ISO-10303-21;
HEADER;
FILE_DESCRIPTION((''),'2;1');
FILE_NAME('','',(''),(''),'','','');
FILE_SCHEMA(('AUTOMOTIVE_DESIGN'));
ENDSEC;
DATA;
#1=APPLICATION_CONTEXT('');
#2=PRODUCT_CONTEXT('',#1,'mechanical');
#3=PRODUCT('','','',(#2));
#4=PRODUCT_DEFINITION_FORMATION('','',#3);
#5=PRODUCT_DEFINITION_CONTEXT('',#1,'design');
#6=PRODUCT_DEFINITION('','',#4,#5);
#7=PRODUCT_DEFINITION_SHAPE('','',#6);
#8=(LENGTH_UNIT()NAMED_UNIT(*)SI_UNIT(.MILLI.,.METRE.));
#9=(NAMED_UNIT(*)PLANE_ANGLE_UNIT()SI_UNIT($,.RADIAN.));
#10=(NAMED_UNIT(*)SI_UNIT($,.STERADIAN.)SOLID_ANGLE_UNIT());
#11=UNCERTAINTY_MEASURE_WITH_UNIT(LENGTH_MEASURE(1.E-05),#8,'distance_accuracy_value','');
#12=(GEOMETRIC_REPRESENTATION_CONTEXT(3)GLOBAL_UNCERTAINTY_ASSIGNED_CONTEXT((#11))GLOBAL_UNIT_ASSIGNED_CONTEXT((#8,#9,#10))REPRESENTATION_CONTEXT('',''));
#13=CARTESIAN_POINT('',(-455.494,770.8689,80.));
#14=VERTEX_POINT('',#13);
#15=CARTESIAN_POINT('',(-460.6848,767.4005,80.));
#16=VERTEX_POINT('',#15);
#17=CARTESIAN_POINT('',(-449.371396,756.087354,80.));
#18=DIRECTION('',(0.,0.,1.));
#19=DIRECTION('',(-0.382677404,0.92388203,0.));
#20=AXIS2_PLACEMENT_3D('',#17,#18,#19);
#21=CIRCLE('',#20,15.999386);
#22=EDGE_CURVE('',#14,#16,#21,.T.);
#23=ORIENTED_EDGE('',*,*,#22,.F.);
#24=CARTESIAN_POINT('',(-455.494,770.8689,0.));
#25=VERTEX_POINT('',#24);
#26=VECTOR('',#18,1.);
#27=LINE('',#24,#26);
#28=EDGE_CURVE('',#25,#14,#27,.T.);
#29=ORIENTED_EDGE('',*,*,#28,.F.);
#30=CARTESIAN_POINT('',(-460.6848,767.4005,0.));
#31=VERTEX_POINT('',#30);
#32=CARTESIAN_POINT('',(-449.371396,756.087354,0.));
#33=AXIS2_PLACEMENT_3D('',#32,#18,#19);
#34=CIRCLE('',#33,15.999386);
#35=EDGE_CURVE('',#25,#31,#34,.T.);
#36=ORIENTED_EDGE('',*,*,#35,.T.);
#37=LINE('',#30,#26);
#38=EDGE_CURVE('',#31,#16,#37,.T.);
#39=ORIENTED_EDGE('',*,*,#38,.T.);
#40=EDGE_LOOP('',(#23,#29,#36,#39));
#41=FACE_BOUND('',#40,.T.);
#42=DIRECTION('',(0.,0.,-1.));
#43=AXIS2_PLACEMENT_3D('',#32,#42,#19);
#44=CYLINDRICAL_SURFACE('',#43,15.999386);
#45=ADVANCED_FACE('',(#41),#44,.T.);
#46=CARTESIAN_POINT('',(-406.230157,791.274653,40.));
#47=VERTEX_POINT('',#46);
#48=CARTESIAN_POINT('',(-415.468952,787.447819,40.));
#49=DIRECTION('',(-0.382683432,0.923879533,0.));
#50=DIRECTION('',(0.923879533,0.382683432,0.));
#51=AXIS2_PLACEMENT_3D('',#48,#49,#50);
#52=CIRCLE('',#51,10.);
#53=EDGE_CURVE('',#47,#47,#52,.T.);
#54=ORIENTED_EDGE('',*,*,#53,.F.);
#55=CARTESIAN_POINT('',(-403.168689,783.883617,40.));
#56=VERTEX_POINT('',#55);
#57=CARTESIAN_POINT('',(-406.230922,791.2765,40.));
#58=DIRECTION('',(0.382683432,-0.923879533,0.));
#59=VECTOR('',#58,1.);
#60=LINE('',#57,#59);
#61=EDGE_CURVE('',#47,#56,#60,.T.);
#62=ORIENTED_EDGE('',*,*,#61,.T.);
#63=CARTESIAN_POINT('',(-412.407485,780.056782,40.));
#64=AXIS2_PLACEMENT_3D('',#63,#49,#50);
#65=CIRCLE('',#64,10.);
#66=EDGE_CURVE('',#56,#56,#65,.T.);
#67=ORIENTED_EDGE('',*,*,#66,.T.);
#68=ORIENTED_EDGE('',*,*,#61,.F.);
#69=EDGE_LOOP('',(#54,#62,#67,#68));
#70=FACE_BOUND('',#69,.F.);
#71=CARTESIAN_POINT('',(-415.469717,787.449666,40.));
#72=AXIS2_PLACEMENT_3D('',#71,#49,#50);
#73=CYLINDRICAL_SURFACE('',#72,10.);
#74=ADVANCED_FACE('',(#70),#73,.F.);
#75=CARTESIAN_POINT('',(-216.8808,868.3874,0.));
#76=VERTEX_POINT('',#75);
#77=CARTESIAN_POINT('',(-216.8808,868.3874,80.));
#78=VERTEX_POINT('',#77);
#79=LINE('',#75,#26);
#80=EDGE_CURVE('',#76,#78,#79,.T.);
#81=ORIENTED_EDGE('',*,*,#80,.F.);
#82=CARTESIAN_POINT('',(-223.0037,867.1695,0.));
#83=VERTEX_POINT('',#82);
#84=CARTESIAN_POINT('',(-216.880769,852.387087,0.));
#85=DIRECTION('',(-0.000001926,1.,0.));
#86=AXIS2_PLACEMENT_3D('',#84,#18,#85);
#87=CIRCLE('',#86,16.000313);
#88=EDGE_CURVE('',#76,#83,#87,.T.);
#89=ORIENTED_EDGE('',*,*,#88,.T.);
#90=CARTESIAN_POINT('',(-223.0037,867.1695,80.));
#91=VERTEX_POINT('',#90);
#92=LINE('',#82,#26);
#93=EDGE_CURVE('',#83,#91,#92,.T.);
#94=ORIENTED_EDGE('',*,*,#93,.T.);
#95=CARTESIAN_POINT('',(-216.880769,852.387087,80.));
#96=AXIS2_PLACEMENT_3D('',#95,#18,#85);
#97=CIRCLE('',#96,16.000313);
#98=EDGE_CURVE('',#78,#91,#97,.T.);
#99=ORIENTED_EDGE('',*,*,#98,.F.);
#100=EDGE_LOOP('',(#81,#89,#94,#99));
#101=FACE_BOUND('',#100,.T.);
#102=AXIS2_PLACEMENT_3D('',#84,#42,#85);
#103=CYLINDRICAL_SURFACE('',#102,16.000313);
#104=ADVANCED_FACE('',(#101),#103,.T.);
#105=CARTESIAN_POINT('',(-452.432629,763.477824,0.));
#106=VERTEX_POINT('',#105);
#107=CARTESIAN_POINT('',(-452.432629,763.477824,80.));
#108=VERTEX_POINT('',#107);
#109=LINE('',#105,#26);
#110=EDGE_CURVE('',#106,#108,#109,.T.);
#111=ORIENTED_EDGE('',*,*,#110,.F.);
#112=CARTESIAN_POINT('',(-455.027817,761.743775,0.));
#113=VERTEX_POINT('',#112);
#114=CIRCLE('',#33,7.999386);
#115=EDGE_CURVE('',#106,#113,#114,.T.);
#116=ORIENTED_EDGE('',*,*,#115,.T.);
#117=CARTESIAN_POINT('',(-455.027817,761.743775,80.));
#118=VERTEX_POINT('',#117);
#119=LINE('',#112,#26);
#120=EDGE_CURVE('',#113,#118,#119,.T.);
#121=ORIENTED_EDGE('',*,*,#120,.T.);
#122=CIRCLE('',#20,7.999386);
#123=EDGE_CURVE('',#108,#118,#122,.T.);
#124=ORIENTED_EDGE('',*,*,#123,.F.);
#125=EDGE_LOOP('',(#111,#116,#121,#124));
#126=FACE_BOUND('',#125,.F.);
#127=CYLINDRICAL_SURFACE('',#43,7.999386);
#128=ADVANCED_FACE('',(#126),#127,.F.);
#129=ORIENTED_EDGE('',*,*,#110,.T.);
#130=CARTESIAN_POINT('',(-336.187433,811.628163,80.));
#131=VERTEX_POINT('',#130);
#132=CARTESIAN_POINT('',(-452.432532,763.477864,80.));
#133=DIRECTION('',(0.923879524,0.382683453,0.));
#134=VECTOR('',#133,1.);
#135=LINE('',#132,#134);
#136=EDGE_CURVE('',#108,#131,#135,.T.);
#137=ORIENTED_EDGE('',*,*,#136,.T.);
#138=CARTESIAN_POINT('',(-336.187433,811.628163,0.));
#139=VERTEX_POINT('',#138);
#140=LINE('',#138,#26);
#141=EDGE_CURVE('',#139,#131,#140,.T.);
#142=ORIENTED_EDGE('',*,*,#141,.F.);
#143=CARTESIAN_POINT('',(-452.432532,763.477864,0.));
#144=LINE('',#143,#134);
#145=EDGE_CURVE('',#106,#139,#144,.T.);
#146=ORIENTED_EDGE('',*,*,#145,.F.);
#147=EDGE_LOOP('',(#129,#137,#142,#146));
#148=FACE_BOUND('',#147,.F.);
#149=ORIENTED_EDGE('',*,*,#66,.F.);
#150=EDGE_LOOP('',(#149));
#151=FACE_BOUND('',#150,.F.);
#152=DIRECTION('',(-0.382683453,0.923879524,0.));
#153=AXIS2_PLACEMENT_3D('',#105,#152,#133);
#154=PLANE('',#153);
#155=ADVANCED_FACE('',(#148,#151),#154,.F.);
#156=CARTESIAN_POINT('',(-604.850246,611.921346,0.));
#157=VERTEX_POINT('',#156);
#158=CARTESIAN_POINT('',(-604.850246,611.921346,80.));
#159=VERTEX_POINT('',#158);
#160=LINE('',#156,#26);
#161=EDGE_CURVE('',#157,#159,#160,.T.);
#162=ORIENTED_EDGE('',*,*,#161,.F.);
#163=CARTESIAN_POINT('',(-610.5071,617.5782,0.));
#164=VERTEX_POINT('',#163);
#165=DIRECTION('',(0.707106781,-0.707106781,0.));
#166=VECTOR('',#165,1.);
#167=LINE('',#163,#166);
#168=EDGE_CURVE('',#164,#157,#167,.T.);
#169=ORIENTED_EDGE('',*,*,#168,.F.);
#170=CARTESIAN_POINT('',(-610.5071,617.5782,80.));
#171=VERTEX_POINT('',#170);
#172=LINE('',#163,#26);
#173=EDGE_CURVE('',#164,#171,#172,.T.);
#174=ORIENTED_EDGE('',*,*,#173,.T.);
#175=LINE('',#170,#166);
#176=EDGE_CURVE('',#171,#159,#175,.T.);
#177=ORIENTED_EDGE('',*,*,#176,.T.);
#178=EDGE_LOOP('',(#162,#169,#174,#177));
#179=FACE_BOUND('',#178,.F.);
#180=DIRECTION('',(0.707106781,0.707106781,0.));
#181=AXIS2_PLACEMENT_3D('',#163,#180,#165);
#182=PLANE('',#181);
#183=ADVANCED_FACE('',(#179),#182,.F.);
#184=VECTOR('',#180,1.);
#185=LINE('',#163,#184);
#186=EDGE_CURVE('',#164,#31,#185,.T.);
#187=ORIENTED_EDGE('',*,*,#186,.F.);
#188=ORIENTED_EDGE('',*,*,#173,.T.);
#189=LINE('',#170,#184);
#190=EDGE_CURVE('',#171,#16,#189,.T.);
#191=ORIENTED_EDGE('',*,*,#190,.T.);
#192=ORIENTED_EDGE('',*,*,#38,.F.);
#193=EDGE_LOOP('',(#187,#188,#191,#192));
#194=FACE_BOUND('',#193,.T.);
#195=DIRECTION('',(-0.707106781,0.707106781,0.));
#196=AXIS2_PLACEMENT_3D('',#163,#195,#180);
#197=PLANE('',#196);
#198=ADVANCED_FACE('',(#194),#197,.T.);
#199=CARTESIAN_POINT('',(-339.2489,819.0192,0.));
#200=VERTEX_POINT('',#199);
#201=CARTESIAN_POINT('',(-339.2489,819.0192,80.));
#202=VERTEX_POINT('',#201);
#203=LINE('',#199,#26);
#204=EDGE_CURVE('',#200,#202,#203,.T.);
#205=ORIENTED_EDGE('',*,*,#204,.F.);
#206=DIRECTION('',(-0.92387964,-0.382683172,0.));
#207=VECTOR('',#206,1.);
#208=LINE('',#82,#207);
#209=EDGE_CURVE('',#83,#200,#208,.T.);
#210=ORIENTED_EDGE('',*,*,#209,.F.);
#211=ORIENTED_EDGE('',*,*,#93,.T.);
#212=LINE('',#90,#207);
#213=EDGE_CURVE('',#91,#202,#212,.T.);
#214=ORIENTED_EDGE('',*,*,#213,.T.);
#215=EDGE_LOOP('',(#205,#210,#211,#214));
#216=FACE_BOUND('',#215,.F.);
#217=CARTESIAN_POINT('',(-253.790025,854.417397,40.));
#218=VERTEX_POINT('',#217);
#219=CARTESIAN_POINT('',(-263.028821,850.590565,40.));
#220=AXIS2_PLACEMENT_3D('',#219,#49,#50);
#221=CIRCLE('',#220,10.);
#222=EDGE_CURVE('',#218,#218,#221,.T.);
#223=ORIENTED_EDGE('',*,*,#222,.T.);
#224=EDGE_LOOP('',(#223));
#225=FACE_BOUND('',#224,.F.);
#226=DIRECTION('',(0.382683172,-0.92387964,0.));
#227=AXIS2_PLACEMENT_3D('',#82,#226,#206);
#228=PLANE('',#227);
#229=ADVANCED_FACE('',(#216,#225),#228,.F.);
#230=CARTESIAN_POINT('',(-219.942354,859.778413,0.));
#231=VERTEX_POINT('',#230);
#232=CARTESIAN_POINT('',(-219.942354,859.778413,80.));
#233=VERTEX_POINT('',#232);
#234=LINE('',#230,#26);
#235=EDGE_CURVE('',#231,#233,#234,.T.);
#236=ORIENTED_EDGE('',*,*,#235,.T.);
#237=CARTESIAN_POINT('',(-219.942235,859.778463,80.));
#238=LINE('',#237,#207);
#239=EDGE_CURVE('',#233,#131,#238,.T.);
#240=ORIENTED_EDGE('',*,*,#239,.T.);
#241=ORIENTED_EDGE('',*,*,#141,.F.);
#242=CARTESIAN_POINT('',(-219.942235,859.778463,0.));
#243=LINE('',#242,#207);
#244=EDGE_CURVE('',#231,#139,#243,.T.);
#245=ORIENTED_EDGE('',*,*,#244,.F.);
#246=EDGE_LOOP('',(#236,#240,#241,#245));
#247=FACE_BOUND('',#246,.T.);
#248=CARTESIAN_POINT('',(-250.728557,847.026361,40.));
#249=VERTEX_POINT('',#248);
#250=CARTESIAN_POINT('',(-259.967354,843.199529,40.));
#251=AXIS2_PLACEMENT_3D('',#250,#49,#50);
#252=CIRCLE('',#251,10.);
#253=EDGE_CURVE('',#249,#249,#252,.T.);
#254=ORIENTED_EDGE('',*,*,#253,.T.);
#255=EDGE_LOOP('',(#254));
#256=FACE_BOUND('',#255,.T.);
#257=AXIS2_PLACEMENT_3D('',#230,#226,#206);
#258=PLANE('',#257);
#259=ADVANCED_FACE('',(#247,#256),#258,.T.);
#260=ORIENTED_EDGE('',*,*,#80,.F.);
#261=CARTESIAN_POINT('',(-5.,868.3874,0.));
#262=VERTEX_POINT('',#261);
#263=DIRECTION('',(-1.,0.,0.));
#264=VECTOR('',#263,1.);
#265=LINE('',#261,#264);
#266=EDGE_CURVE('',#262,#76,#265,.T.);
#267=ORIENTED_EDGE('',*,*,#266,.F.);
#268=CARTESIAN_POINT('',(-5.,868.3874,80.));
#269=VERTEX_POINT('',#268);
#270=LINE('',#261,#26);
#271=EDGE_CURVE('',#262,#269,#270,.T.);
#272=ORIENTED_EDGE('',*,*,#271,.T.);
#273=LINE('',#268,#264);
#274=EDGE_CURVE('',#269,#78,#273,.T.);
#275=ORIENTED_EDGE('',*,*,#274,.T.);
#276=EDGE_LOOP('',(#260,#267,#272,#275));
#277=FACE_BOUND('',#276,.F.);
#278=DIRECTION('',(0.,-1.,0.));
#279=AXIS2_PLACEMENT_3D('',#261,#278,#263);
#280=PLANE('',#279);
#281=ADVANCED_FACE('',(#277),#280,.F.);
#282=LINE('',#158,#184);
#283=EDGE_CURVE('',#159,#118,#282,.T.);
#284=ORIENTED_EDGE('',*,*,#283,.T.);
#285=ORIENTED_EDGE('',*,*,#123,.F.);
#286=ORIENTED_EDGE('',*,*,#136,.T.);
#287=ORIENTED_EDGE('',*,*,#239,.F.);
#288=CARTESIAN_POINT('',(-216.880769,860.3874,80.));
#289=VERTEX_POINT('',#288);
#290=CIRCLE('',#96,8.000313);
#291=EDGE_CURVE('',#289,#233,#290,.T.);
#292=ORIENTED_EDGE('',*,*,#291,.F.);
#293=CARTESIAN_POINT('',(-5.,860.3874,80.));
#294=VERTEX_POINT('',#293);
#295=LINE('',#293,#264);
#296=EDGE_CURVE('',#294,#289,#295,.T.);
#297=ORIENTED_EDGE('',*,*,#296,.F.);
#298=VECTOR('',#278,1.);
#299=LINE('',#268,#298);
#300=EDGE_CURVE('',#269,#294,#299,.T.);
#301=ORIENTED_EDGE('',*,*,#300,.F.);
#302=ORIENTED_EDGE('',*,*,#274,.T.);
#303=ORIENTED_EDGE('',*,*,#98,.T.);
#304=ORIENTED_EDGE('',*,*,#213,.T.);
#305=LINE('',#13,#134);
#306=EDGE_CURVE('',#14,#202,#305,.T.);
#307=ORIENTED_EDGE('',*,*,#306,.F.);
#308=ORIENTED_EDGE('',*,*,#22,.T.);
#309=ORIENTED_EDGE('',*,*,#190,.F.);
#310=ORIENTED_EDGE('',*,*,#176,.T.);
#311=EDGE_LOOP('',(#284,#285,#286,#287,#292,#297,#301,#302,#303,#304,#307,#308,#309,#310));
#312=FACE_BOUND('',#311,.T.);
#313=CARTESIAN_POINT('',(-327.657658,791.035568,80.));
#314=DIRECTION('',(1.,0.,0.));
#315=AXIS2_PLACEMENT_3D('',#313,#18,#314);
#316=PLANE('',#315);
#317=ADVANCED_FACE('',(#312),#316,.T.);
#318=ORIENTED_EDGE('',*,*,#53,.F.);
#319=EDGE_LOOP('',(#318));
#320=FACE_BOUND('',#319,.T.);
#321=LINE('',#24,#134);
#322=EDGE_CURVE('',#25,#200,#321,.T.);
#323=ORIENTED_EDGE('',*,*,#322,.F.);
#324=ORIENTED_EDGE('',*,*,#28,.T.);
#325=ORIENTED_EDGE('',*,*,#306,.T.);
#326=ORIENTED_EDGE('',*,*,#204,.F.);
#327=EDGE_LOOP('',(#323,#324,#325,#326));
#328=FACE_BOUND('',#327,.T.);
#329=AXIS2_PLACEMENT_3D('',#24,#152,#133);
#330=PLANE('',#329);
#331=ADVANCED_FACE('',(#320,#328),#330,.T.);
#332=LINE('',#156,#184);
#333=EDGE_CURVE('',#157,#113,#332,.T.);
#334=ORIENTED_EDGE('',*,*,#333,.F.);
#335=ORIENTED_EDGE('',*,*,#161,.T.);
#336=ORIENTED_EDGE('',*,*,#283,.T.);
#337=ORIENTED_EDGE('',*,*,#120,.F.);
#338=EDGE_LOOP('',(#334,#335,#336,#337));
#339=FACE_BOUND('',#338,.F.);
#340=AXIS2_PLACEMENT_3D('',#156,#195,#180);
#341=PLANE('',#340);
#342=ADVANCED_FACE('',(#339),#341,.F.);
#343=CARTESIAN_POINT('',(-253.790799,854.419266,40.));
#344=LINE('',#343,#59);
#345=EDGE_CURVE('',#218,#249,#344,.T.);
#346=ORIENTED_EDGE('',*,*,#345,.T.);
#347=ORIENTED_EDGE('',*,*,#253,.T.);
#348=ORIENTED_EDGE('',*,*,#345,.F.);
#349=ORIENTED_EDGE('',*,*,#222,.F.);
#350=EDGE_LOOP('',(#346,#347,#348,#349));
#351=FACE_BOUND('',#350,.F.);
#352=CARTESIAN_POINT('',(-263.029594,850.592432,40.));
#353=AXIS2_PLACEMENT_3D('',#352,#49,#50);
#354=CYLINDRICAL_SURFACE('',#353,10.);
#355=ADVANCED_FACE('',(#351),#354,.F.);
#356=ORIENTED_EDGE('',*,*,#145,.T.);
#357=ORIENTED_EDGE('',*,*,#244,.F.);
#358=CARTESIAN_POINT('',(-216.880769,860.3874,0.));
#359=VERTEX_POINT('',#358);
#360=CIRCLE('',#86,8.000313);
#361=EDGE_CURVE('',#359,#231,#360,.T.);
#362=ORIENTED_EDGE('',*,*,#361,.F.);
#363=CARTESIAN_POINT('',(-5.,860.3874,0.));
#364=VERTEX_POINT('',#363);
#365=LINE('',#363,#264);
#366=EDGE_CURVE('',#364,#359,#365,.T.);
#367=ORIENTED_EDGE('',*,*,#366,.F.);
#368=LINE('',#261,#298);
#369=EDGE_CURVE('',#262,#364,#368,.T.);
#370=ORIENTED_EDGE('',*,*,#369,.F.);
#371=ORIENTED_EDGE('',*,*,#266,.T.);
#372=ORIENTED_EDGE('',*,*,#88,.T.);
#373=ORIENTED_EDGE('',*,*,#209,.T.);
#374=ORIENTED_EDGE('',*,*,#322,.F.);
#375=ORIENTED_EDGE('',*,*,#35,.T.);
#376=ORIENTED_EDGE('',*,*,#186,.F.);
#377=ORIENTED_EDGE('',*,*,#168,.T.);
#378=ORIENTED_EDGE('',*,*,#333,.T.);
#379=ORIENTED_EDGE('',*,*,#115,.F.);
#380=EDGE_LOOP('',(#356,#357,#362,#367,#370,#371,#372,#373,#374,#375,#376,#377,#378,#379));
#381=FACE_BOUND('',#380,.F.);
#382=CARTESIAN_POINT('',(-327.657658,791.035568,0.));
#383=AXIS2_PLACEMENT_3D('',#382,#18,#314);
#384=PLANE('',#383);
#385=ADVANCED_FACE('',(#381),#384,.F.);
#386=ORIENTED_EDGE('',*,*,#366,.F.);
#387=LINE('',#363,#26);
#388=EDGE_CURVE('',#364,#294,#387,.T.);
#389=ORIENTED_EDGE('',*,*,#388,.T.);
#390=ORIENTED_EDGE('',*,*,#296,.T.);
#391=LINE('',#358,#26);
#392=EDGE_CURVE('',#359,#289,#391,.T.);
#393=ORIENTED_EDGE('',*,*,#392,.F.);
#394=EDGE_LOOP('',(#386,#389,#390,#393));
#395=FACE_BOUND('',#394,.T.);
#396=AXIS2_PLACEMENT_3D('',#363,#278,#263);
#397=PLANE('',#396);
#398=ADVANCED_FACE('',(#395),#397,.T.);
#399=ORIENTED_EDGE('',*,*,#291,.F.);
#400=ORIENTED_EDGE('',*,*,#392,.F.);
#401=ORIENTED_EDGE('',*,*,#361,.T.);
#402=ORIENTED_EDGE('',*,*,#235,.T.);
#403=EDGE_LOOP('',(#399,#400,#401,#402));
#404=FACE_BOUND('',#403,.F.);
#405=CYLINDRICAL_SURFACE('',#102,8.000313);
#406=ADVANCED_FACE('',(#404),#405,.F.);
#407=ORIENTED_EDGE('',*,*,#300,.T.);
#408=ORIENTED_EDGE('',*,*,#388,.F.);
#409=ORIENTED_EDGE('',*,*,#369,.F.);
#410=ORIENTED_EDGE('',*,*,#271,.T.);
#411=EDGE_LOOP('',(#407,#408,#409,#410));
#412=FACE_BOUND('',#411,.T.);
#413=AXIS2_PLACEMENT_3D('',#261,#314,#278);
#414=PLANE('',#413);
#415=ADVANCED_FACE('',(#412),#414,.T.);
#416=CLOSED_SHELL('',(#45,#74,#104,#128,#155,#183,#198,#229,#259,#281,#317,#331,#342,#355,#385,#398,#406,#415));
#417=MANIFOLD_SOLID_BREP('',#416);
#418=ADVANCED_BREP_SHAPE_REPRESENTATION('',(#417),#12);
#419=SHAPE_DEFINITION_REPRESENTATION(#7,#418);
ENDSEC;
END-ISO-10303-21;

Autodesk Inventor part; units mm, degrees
ref_plane "YZ Plane" through (0, 0, 0) normal (1, 0, 0) x (0, 1, 0)
ref_plane "XZ Plane" through (0, 0, 0) normal (0, 1, 0) x (-1, 0, 0)
ref_plane "XY Plane" through (0, 0, 0) normal (0, 0, 1) x (1, 0, 0)
sketch "Sketch2" plane through (0, 0, 0) normal (0, 0, 1) x (1, 0, 0)
  line L0 (0, 277.6336) -> (196.3166, 196.3166) construction
  line L1 (196.3166, 196.3166) -> (277.6336, 0) construction
  line L2 (277.6336, 0) -> (196.3166, -196.3166) construction
  line L3 (196.3166, -196.3166) -> (0, -277.6336) construction
  line L4 (0, -277.6336) -> (-196.3166, -196.3166) construction
  line L5 (-196.3166, -196.3166) -> (-277.6336, 0) construction
  line L6 (-277.6336, 0) -> (-196.3166, 196.3166) construction
  line L7 (-196.3166, 196.3166) -> (0, 277.6336) construction
  line L8 (-196.3166, 196.3166) -> (0, 277.6336) construction
  line L9 (-461.2666, 773.8898) -> (-221.0579, 873.3874) construction
  line L10 (-98.1583, 236.9751) -> (-341.1623, 823.6386) construction
  line L11 (-221.0579, 873.3874) -> (0, 873.3874) construction
  line L12 (0, 873.3874) -> (0, 277.6336) construction
  line L13 (-461.2666, 773.8898) -> (-617.5782, 617.5782) construction
  line L14 (-617.5782, 617.5782) -> (-196.3166, 196.3166) construction
  line L15 (-223.0037, 867.1695) -> (-339.2489, 819.0192)
  line L16 (-5, 868.3874) -> (-216.8808, 868.3874)
  line L17 (-455.494, 770.8689) -> (-339.2489, 819.0192)
  line L18 (-610.5071, 617.5782) -> (-460.6848, 767.4005)
  arc A0 (-216.8808, 868.3874) -> (-223.0037, 867.1695) centre (-216.8808, 852.3874) ccw
  arc A1 (-455.494, 770.8689) -> (-460.6848, 767.4005) centre (-449.3711, 756.0868) ccw
  point P0 (0, 0)
  point P1 (0, 0)
  point P2 (0, 0)
  point P3 (-220.0634, 868.3874)
  point P4 (-458.4343, 769.651)
  dimension "d0" = 513
  dimension "d1" = 260
  dimension "d2" = 635
  dimension "d6" = 5
  dimension "d10" = 5
  dimension "d14" = 5
  dimension "d15" = 16
contour flange "Contour Flange1" sketch "Sketch2" thickness 8 bend radius 8 width 80 along (0, 0, 1) mid plane no both sides no wall seen from (-110.9404, 868.3874, 0) lies toward (0, -1, 0) curves L16 A0 L15 L17 A1 L18
bend "Bend1"
corner "Corner1"
sketch "Sketch3" plane through (-455.494, 770.8689, 80) normal (-0.3826834, 0.9238795, 0) x (0.9238795, 0.3826834, 0)
  line L0 (125.8228, 80) -> (125.8228, 0) construction
  line L1 (0, 0) -> (251.6457, 0) projected
  circle A0 centre (43.3228, 40) radius 10
  circle A1 centre (208.3228, 40) radius 10
  point P0 (125.8228, 40)
  dimension "d27" = 20
  dimension "d28" = 82.5
extrude "Extrusion1" cut sketch "Sketch3" against normal up to surface (8 mm away)
equation "\"d0\" = Барабан_габарит_по_кассетам"
equation "\"d1\" = Кассета_длина_грани"
equation "\"d2\" = Кассета_высота"
equation "\"d10\" = d6"
equation "\"d15\" = BendRadius + Thickness"
equation "\"d16\" = Thickness"
equation "\"d17\" = BendReliefWidth"
equation "\"d18\" = BendReliefDepth"
equation "\"d19\" = MinimumRemnant"
equation "\"d20\" = TransitionRadius"
equation "\"d22\" = BendRadius"
equation "\"d24\" = CornerReliefSize"
equation "\"d25\" = GapSize"
equation "\"d26\" = JacobiRadiusSize"
equation "\"BendRadius\" = Thickness"
equation "\"BendReliefWidth\" = Thickness"
equation "\"BendReliefDepth\" = 0.5 * Thickness"
equation "\"CornerReliefSize\" = 4 * Thickness"
equation "\"MinimumRemnant\" = 2 * Thickness"
equation "\"TransitionRadius\" = BendRadius"
equation "\"JacobiRadiusSize\" = BendRadius"
equation "\"GapSize\" = Thickness"
equation "\"Барабан_габарит_по_кассетам\" = 513"
equation "\"Кассета_длина_грани\" = 260"
equation "\"Кассета_высота\" = 635"
equation "\"Thickness\" = 8"
properties part number "ДМФ 01 52 Верхний лист"
